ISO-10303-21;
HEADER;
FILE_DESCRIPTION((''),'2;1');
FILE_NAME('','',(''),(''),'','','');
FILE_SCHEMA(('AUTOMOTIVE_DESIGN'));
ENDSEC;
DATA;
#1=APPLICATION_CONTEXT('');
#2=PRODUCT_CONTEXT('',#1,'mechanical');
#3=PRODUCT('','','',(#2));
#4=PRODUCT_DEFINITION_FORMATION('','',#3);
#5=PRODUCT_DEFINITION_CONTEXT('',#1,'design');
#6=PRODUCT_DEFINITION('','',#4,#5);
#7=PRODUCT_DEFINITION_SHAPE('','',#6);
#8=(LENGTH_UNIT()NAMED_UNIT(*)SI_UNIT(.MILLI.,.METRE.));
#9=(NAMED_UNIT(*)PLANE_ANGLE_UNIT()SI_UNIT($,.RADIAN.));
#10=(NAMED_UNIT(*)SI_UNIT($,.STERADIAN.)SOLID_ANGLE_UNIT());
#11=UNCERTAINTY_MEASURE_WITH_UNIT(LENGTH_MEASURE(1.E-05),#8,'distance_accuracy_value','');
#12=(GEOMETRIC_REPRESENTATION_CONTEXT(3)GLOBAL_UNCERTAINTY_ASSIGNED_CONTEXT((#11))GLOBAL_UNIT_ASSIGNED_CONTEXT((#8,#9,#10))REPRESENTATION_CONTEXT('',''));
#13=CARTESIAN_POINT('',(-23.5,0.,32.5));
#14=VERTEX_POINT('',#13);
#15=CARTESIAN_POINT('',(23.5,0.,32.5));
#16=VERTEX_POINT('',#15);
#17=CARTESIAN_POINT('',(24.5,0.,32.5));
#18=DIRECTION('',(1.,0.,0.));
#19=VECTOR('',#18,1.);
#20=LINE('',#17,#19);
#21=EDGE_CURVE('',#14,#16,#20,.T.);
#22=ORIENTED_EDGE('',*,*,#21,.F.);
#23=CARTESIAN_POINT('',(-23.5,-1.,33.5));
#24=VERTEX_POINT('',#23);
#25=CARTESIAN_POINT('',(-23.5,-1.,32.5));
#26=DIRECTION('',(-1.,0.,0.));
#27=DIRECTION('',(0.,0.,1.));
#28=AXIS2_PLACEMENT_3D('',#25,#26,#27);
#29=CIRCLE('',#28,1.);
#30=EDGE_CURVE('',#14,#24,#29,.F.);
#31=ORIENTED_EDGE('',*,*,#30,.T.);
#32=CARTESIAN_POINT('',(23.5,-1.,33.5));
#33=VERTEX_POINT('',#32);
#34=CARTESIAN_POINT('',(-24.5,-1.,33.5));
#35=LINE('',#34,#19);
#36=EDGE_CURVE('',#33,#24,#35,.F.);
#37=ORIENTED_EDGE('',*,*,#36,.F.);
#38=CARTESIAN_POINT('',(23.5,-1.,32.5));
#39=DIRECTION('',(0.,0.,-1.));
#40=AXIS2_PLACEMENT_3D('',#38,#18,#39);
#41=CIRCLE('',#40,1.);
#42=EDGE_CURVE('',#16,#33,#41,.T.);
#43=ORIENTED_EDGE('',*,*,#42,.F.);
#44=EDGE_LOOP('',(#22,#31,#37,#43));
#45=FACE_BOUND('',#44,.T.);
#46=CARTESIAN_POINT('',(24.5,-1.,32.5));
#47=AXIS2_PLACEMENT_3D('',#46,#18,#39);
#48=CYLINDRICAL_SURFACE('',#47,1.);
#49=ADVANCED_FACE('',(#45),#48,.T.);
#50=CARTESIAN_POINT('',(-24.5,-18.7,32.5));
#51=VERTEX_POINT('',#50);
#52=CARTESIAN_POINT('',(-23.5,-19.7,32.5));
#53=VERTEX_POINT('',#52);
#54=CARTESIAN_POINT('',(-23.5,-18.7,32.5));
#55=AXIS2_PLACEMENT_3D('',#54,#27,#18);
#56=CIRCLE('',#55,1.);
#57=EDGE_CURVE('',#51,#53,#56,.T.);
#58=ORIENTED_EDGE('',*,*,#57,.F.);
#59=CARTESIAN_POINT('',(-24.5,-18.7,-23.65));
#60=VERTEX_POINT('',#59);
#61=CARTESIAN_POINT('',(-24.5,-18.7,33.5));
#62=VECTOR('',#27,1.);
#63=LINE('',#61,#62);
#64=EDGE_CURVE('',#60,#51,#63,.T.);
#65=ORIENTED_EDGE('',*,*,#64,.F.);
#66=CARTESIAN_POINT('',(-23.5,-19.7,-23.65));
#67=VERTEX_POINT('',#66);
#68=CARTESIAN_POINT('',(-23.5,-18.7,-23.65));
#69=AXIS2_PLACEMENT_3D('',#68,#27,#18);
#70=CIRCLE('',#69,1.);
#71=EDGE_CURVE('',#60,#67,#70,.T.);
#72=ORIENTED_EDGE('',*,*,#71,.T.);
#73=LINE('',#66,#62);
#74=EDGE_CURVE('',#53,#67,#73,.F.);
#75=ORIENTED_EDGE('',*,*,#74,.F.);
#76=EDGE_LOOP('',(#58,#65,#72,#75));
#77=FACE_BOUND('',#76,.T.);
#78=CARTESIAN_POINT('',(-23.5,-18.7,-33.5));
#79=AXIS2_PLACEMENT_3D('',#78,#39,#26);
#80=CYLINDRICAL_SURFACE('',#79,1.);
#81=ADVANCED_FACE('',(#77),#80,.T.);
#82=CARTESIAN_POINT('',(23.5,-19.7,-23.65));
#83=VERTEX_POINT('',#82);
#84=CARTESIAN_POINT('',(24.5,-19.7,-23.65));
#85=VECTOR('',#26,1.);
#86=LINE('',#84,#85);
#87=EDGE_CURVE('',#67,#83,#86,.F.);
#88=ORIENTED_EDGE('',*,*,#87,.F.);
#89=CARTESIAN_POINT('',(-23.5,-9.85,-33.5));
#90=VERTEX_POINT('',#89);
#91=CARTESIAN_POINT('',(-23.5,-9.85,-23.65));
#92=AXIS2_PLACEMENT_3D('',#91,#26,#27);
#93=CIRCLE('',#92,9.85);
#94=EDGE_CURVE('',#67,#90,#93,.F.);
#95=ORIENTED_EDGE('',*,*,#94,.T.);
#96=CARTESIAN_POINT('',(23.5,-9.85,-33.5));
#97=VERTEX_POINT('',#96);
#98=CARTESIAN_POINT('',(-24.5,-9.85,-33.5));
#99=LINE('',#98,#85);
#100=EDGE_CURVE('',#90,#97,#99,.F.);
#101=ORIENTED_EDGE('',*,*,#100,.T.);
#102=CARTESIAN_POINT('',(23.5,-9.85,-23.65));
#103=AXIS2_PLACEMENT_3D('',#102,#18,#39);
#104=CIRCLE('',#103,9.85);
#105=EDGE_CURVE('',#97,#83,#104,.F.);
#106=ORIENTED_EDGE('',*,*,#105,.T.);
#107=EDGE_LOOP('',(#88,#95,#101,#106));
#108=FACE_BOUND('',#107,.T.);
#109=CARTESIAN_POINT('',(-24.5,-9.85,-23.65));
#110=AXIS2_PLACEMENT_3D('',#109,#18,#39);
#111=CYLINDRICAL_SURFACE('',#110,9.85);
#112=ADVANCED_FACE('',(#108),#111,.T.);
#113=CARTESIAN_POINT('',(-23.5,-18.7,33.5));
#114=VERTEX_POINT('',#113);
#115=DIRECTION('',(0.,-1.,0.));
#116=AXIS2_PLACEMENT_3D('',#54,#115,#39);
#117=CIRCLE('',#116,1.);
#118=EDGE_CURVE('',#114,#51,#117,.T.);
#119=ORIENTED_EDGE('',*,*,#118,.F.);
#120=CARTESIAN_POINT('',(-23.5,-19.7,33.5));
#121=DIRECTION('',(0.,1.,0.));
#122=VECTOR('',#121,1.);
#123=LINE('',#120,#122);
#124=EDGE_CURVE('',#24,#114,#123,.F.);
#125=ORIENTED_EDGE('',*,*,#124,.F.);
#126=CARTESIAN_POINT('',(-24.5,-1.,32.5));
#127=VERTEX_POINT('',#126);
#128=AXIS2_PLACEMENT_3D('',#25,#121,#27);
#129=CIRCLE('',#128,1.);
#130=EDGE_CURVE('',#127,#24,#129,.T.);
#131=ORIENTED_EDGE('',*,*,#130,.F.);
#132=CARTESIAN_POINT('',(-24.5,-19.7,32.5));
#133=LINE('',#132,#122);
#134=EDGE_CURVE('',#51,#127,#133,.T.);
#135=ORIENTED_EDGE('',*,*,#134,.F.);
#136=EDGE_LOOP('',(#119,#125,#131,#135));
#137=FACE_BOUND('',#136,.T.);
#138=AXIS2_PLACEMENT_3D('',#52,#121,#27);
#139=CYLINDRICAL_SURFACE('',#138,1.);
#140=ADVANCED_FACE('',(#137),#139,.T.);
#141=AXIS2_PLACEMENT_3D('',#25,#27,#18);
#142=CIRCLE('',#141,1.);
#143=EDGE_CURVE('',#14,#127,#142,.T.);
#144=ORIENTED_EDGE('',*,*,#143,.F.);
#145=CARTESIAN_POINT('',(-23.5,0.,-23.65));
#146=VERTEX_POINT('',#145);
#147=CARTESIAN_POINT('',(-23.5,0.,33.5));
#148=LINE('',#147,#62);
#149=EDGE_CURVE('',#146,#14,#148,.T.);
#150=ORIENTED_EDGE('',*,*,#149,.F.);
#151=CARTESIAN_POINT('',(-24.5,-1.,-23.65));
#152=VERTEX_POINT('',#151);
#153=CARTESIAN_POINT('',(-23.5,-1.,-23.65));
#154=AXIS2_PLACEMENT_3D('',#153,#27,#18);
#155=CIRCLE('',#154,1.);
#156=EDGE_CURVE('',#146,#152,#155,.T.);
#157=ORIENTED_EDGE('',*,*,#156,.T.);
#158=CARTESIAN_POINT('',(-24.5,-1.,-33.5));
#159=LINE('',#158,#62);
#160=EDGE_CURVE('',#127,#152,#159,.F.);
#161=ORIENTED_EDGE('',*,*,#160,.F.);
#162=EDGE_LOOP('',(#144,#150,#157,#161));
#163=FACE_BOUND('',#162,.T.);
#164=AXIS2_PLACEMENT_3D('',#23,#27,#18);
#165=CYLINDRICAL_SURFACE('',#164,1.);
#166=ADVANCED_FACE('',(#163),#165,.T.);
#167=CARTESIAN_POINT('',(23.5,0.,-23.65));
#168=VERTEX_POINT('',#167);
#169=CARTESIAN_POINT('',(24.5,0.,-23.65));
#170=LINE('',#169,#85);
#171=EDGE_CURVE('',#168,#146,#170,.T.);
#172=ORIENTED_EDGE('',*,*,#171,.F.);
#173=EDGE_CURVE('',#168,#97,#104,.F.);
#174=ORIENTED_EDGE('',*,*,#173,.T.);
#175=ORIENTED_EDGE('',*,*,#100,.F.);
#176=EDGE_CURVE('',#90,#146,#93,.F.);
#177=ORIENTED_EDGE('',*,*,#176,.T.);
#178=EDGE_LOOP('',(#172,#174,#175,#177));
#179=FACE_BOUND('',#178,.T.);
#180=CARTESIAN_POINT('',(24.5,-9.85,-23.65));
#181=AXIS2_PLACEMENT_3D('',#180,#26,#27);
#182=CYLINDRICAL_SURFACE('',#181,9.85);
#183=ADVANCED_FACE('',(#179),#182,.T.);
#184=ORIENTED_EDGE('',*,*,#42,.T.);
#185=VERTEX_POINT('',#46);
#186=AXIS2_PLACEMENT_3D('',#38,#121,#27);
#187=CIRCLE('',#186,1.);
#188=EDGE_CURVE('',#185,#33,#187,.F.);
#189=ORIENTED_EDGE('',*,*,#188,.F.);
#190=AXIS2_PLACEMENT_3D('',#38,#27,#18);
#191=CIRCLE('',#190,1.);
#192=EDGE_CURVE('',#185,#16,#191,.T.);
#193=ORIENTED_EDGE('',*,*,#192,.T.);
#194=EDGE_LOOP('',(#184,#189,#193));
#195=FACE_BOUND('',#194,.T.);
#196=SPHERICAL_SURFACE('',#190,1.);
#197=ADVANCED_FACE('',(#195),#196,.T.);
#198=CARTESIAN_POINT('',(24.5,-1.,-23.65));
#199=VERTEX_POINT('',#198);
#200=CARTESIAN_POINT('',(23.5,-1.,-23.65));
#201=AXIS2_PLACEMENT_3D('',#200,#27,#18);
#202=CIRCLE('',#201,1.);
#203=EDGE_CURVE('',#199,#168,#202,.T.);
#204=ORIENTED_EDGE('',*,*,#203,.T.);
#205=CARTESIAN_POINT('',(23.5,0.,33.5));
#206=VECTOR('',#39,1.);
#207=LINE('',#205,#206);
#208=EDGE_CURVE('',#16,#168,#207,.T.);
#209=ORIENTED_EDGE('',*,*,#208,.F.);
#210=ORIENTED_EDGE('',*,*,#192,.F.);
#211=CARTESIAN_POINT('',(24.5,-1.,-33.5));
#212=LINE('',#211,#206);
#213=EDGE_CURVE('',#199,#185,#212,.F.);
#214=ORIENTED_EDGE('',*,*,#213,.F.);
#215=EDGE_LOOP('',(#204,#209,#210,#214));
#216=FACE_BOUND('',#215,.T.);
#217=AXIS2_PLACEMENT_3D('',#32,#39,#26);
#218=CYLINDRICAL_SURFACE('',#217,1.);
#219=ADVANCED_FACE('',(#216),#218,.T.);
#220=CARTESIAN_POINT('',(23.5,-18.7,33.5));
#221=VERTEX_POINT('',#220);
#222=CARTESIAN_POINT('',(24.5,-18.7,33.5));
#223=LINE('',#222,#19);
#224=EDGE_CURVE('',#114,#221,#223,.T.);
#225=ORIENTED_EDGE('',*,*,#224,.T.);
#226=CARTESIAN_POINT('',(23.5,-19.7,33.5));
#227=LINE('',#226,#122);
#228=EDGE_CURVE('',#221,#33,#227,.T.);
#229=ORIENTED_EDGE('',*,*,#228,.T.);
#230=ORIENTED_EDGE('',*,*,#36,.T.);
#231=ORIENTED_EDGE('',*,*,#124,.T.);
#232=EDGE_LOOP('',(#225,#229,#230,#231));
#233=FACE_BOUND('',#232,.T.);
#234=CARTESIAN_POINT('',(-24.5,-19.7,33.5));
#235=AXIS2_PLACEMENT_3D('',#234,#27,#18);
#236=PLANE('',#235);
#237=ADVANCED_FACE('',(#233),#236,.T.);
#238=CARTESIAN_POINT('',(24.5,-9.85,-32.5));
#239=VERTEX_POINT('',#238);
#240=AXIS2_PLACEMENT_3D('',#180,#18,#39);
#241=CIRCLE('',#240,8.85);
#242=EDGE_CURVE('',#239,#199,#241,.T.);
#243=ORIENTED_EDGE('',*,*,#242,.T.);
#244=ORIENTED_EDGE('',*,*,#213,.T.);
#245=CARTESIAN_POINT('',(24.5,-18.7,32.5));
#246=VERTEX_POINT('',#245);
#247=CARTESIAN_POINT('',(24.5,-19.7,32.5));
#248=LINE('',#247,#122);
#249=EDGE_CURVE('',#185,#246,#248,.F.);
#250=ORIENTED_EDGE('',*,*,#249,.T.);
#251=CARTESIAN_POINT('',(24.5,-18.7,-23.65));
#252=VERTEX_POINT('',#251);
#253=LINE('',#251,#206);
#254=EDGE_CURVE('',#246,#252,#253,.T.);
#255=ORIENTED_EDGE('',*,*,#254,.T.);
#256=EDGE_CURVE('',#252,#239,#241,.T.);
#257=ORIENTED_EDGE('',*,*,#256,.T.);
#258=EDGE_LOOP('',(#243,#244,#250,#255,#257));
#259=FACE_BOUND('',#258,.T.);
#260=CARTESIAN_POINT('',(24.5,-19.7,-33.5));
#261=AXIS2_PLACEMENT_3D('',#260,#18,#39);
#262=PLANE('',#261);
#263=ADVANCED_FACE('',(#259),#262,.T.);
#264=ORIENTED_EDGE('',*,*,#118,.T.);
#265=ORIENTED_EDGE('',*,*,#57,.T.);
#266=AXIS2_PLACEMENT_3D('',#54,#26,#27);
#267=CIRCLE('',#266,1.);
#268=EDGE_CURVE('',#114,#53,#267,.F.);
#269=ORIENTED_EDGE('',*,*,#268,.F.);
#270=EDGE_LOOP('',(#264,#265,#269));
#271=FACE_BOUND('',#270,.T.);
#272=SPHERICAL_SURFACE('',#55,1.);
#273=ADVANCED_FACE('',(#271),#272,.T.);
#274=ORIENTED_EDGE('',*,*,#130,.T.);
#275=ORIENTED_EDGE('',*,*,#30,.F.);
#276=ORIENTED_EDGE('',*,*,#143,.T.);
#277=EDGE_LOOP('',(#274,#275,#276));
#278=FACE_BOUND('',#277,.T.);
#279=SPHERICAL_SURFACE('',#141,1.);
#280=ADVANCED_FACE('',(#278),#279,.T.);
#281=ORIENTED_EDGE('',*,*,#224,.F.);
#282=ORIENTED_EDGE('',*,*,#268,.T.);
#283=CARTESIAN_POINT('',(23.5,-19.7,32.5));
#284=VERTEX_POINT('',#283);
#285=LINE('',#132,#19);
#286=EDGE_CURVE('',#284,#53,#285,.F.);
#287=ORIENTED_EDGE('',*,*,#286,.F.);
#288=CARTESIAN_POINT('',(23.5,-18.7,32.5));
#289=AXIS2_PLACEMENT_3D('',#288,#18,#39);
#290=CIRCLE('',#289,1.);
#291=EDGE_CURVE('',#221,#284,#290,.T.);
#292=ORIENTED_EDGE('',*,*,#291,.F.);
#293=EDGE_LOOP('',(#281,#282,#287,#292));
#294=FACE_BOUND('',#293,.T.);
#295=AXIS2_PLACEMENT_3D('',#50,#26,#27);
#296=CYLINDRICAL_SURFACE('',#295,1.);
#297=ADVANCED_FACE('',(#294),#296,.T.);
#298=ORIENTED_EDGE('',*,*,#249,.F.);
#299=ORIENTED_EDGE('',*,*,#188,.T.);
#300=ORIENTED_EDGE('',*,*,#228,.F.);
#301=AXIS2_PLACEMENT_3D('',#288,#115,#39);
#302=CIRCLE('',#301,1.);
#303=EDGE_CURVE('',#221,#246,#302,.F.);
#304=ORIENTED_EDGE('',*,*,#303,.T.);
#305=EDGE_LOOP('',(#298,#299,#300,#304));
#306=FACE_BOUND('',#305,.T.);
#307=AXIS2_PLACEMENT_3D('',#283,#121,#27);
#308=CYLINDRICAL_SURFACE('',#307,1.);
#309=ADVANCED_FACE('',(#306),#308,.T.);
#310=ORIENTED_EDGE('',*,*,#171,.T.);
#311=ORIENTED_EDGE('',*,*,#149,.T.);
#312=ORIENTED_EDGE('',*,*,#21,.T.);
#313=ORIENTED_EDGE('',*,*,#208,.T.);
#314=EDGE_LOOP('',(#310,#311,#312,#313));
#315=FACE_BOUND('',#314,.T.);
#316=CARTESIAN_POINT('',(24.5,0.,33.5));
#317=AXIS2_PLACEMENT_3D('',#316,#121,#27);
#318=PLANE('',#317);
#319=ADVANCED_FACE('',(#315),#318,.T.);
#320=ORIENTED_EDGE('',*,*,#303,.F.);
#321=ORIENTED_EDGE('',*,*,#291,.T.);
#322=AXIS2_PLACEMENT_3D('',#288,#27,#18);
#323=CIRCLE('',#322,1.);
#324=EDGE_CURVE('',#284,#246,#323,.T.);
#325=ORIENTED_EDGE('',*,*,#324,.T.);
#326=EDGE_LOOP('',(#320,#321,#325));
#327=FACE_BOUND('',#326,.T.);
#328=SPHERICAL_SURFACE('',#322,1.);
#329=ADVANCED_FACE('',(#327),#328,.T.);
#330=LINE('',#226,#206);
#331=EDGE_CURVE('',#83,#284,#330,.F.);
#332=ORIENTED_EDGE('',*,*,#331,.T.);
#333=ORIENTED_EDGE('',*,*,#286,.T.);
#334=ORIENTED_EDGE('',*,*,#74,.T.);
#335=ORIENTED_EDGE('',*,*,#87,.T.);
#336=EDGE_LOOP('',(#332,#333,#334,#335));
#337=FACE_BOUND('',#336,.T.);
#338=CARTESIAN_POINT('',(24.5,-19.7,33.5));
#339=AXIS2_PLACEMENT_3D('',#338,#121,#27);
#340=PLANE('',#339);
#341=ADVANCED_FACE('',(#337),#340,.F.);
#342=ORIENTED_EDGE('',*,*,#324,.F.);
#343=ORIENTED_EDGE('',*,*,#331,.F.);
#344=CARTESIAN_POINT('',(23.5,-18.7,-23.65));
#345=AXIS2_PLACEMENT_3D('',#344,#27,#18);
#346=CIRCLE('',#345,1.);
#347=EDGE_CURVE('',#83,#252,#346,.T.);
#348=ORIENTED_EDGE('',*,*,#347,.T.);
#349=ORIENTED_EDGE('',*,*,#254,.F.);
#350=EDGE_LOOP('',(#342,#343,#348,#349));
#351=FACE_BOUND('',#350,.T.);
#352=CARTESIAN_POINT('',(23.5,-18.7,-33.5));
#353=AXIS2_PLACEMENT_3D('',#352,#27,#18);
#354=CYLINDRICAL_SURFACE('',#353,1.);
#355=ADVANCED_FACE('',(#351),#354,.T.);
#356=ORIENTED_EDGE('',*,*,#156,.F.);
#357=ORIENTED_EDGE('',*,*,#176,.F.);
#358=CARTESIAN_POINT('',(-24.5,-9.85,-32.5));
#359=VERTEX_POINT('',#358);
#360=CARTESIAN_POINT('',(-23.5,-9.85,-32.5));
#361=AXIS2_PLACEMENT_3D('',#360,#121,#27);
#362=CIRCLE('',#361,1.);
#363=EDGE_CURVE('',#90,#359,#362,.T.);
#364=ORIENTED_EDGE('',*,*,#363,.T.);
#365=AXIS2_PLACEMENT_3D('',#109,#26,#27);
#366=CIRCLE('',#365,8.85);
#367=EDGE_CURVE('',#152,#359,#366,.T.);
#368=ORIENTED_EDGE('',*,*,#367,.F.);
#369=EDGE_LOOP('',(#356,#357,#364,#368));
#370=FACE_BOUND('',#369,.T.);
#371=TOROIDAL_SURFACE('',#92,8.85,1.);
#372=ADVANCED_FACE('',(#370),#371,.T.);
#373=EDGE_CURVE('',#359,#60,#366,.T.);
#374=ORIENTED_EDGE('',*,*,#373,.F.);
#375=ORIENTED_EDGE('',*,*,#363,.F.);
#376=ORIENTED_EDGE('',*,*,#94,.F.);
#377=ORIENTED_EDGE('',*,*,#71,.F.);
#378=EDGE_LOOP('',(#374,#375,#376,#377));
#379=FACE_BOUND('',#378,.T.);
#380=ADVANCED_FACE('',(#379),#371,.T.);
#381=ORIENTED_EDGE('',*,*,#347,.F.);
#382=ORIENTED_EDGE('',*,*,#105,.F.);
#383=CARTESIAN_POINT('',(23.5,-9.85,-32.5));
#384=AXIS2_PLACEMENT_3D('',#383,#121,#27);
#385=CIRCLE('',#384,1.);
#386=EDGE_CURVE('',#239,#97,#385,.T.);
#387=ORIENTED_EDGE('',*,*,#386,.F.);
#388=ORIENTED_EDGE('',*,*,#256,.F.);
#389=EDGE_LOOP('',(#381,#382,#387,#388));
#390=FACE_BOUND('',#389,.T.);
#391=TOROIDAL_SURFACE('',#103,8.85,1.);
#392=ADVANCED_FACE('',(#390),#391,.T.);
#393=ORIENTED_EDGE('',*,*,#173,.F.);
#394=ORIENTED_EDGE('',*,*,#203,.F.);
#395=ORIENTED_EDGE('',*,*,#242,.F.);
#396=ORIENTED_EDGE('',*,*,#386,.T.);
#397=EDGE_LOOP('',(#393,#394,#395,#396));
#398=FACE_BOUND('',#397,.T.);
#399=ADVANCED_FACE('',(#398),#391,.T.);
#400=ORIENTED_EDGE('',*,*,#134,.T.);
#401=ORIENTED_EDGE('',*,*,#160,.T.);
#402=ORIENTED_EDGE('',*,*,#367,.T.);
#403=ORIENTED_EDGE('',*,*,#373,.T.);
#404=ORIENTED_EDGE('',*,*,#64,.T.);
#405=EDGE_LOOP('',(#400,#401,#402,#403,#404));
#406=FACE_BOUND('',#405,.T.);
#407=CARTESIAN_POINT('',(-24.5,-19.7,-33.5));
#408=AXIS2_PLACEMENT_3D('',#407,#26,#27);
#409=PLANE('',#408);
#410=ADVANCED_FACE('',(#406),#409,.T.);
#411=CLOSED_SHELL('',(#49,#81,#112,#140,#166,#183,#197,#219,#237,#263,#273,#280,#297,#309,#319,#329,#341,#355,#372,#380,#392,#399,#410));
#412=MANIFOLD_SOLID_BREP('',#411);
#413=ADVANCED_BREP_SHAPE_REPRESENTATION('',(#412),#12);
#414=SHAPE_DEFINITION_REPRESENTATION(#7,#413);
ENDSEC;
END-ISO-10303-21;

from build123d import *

# Parameters (mm, degrees)
SKETCH1_W           = 49
SKETCH1_H           = 67
BOSS_EXTRUDE1_DEPTH = 19.7
FILLET3_R           = 9.85
FILLET4_R           = 1


with BuildPart() as part:
    # Sketch1 → Boss-Extrude1 (new body)
    with BuildSketch(Plane(origin=(0, 0, 0), x_dir=(1, 0, 0), z_dir=(0, 1, 0))):
        Rectangle(SKETCH1_W, SKETCH1_H)
    extrude(amount=-BOSS_EXTRUDE1_DEPTH)

    # Fillet3
    fillet3_edges = [part.edges().sort_by_distance(p)[0] for p in [
        (0, -19.7, -33.5),
        (0, 0, -33.5),
    ]]
    fillet(fillet3_edges, radius=FILLET3_R - 0.0001)  # a hair under: the kernel refuses the full size

    # Fillet4
    fillet4_edges = [part.edges().sort_by_distance(p)[0] for p in [
        (0, -19.7, 33.5),
        (-24.5, 0, 4.92495),
        (-24.5, -19.7, 4.92495),
        (-24.5, -2.884968916, -30.615031084),
        (-24.5, -16.815031084, -30.615031084),
        (24.5, -2.884968916, -30.615031084),
        (24.5, -16.815031084, -30.615031084),
        (24.5, -19.7, 4.92495),
        (0, 0, 33.5),
        (24.5, 0, 4.92495),
        (24.5, -9.85, 33.5),
        (-24.5, -9.85, 33.5),
    ]]
    fillet(fillet4_edges, radius=FILLET4_R)


solid = part.part
